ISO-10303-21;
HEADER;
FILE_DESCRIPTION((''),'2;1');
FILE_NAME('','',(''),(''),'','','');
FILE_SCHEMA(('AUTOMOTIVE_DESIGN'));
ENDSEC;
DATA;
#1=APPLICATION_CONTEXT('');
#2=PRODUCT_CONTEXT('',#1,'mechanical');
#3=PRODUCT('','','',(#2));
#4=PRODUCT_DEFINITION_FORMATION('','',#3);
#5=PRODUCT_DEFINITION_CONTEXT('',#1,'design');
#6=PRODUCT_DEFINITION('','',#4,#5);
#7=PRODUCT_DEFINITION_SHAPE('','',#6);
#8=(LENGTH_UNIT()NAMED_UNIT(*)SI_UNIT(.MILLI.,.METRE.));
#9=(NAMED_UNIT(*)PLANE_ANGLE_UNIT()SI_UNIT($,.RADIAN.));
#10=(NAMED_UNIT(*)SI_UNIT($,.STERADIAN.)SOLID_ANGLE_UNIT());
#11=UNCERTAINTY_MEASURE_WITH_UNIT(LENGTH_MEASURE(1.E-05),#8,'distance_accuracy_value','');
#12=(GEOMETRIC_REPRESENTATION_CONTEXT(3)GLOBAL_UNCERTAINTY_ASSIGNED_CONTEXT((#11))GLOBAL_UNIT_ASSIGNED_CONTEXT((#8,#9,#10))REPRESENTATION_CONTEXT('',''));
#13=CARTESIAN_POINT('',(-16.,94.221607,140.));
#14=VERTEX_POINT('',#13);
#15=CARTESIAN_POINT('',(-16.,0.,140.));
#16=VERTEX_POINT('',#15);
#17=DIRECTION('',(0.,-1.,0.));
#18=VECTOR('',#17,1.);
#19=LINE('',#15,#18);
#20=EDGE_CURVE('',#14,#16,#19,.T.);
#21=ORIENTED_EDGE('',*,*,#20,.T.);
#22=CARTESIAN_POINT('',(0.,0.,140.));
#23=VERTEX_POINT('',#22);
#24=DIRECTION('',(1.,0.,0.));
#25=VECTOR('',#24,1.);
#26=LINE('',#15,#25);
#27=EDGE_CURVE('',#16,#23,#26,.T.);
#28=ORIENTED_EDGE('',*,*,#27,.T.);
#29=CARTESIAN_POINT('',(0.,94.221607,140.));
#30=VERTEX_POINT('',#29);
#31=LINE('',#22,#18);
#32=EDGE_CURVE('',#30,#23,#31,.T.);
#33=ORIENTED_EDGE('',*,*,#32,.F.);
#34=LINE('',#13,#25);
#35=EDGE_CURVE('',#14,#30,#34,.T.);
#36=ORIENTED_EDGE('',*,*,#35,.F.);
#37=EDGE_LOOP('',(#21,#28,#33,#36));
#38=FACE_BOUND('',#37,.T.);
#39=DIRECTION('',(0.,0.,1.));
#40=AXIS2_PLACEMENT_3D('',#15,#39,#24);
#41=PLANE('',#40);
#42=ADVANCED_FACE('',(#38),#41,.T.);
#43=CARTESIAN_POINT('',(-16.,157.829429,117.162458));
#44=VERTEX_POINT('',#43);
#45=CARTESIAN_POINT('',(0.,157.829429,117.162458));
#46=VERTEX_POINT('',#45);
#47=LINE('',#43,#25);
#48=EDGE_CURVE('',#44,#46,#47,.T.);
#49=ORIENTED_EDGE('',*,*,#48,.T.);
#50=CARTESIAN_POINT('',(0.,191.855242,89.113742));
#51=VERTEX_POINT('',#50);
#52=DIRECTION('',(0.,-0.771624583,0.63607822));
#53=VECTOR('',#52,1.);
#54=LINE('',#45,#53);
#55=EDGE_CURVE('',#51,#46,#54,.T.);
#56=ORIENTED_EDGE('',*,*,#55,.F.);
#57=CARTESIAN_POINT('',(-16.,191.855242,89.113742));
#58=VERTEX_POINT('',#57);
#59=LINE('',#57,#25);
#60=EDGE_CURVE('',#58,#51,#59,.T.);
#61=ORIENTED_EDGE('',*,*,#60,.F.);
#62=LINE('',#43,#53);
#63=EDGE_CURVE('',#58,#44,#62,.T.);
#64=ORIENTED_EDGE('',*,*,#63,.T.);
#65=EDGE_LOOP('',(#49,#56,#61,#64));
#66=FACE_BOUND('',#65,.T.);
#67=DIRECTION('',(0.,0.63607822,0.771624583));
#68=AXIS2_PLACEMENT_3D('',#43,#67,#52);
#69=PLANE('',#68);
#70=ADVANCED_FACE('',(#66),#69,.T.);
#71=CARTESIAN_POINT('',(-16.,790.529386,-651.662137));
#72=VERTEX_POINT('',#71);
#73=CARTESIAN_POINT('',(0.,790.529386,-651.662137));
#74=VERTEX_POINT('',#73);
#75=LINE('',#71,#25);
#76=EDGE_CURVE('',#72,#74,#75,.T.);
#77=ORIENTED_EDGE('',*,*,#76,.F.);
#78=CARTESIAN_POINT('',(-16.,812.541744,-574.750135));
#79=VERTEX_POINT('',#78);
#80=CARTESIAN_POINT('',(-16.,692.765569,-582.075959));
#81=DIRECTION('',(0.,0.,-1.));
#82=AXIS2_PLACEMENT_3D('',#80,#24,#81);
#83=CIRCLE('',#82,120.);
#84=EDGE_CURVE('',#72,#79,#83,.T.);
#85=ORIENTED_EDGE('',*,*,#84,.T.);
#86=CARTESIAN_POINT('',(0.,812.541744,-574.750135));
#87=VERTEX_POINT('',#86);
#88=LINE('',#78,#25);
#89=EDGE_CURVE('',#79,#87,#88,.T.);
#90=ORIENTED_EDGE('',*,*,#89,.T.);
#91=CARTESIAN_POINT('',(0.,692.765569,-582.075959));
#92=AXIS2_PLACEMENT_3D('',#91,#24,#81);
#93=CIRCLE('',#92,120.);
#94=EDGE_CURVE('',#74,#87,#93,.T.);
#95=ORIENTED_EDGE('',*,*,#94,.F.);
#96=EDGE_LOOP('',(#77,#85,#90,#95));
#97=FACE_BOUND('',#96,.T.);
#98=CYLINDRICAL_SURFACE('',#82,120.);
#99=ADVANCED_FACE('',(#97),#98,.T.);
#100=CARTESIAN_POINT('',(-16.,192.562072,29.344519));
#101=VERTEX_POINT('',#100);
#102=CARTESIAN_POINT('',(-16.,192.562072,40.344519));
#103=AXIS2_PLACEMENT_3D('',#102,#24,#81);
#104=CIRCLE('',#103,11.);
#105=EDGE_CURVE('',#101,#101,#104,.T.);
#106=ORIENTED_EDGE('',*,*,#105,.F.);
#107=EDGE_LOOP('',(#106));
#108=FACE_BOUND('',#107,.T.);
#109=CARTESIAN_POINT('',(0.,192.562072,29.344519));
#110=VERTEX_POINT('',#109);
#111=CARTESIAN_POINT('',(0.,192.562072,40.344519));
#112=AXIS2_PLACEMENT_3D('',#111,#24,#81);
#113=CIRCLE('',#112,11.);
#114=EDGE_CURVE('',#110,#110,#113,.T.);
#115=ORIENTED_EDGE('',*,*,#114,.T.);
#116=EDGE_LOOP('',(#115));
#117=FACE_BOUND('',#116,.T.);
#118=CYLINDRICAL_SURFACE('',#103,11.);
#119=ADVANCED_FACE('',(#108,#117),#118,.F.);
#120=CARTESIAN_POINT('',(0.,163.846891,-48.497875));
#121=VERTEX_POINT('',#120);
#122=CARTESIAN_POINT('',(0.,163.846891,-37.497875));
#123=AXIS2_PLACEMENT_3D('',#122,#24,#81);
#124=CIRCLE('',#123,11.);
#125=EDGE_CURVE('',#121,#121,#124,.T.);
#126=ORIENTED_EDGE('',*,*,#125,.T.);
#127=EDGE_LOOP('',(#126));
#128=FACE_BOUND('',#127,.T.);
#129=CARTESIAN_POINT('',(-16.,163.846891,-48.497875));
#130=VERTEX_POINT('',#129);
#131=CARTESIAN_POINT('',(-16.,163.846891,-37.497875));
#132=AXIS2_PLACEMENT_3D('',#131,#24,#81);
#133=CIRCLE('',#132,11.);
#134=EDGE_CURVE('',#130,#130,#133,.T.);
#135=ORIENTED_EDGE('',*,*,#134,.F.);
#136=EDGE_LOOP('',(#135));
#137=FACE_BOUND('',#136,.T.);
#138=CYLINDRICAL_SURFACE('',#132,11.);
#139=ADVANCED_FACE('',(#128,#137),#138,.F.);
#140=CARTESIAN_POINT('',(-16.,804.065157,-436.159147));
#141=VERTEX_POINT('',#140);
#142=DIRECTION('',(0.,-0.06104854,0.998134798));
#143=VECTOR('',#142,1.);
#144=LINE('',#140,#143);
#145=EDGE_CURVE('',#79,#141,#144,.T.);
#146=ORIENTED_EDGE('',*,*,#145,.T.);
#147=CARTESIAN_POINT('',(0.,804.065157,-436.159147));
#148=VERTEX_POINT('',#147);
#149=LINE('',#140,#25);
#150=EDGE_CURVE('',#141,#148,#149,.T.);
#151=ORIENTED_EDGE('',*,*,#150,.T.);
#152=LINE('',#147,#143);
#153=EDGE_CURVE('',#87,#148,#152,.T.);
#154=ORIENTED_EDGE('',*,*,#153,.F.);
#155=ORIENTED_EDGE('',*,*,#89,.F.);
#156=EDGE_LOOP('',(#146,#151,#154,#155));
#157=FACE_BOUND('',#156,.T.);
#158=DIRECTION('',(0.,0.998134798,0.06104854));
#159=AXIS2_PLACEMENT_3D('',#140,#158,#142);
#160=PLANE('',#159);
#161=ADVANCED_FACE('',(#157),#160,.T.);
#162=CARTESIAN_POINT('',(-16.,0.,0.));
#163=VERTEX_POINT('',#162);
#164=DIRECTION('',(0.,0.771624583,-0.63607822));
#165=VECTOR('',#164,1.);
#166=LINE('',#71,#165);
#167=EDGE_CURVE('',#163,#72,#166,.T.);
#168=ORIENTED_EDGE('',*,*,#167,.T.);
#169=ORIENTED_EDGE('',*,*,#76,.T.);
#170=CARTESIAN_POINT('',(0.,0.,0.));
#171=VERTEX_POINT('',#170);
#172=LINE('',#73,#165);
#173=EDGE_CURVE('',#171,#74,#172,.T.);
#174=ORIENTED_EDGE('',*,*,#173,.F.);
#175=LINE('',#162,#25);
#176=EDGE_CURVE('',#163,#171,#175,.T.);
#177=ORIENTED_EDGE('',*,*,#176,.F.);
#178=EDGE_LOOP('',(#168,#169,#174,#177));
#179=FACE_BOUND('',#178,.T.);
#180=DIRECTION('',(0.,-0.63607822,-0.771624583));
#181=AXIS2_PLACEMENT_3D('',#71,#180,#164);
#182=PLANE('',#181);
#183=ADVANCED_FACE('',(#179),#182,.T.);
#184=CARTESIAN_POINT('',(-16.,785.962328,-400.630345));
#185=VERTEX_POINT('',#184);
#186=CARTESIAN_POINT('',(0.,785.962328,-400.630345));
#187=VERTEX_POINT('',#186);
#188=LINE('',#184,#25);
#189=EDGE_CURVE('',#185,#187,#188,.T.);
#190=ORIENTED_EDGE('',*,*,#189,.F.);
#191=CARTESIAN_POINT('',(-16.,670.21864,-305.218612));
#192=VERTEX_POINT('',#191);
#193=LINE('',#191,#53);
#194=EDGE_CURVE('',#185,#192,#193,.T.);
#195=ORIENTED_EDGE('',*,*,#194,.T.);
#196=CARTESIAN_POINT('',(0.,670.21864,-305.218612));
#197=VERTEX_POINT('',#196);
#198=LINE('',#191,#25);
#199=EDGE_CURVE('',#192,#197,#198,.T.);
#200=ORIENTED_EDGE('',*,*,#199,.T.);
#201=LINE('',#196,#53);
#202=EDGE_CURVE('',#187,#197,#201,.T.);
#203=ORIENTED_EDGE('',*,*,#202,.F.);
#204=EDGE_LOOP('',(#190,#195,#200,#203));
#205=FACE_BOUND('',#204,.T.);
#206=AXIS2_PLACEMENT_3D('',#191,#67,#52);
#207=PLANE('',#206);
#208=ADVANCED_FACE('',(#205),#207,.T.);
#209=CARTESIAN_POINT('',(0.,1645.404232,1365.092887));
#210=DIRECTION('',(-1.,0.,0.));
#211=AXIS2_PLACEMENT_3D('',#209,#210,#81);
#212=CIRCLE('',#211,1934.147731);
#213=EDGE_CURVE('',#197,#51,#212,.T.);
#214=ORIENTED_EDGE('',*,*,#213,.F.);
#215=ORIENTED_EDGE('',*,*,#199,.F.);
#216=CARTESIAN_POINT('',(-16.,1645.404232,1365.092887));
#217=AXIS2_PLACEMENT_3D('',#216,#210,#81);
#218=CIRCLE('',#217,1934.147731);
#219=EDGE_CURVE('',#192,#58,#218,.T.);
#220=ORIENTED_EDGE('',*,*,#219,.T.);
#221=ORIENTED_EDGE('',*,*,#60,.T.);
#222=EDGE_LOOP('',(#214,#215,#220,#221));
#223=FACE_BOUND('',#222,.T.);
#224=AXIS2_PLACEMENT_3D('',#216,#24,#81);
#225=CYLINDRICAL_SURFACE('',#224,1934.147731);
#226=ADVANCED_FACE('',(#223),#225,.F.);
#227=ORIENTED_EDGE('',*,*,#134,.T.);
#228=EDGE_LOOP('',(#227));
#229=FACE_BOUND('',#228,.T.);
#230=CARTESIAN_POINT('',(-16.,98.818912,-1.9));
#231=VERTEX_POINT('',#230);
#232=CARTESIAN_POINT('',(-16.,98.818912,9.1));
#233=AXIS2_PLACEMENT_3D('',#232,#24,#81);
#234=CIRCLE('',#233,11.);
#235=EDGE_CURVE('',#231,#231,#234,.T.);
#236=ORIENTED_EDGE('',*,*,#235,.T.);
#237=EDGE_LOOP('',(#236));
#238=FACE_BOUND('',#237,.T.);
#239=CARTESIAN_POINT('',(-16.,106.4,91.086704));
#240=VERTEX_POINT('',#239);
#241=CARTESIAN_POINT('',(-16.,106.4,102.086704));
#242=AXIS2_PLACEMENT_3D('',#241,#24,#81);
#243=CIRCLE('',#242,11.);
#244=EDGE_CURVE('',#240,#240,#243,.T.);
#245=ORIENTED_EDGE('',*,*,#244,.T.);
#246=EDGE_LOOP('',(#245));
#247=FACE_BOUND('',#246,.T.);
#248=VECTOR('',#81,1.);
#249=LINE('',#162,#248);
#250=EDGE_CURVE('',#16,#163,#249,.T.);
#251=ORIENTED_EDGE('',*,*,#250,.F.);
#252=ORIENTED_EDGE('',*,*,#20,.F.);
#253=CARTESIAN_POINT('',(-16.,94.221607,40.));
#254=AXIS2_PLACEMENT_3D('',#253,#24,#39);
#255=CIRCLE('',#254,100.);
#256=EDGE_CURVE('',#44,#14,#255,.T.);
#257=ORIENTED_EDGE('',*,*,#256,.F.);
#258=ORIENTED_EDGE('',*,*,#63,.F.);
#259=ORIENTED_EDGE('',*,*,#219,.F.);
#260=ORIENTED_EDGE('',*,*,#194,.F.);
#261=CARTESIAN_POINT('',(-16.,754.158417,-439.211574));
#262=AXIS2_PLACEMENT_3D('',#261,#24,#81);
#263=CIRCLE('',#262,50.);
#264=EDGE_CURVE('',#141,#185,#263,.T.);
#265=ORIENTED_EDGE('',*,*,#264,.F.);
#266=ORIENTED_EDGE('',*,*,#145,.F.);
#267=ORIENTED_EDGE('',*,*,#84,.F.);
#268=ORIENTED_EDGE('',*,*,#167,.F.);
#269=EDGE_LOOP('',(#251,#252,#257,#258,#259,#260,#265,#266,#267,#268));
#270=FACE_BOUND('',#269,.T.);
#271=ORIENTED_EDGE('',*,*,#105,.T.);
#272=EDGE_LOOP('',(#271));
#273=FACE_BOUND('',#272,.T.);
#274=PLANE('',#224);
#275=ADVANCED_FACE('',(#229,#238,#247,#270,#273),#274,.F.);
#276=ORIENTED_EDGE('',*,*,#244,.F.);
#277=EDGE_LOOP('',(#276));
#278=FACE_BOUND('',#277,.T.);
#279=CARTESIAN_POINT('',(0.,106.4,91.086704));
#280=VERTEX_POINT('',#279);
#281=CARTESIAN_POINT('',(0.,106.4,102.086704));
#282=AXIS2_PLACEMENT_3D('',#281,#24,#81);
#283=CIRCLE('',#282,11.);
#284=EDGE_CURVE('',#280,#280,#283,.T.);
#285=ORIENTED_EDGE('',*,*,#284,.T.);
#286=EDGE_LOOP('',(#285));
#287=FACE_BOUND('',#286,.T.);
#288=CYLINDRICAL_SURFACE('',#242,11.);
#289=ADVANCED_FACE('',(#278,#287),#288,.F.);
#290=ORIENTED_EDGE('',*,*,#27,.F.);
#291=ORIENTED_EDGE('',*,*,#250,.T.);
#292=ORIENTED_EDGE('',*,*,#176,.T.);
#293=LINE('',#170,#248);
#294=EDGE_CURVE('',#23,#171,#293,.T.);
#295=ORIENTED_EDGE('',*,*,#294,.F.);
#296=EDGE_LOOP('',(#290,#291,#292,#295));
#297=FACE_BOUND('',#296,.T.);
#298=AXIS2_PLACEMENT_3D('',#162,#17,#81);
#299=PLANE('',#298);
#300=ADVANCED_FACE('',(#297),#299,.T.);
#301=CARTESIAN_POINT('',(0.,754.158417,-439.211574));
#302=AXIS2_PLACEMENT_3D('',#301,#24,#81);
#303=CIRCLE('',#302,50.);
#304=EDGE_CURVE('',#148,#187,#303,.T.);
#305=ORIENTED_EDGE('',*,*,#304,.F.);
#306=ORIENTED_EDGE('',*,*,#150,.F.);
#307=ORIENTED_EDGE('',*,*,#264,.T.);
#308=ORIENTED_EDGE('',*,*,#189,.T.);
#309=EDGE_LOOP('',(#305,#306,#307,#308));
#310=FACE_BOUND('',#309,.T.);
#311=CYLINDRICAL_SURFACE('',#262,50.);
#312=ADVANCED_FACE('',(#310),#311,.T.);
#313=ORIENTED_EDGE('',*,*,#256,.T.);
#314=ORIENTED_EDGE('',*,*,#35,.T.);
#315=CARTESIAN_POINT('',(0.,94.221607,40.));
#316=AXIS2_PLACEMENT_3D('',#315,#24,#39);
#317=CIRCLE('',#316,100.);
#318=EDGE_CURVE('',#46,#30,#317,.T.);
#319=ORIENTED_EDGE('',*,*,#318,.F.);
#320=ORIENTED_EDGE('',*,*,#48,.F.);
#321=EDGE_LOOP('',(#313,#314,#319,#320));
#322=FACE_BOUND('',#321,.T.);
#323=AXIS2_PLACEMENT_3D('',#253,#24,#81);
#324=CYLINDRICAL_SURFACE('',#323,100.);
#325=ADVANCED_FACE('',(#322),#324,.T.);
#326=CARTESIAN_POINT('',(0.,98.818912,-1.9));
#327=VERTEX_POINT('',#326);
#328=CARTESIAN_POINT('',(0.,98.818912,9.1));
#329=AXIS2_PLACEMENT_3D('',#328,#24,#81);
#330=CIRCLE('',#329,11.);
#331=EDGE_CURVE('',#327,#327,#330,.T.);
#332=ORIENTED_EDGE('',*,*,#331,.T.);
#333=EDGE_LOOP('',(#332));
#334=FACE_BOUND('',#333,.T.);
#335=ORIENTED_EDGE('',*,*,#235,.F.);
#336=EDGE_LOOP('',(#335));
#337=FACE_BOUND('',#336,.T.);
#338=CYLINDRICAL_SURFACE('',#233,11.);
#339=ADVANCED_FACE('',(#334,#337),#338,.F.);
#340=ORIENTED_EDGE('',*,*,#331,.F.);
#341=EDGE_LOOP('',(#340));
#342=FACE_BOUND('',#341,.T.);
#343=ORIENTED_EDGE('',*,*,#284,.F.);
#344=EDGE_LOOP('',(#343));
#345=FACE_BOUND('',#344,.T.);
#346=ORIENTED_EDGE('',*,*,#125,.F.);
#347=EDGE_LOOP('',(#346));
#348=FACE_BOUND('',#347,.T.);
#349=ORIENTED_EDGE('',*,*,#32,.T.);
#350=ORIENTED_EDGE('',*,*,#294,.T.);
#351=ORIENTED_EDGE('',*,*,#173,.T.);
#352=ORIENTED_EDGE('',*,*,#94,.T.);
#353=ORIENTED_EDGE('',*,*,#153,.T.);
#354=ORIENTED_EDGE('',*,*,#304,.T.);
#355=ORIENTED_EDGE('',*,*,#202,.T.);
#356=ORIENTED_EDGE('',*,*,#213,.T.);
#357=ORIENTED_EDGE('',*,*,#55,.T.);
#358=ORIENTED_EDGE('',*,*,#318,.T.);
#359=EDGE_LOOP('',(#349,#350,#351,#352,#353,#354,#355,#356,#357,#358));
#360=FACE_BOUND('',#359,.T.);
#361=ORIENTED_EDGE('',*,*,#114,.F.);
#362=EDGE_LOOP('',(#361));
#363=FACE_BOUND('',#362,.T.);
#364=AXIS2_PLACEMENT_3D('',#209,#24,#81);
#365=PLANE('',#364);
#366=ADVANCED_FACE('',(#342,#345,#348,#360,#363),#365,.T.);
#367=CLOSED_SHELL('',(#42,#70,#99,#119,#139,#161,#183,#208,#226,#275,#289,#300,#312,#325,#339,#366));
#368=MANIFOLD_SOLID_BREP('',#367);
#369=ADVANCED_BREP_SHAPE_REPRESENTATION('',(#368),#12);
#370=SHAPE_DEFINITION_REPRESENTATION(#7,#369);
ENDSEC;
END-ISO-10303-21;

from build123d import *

# Parameters (mm, degrees)
BASE_FLANGE1_DEPTH = 16
SKETCH3_R          = 11
CUT_HOLES_DEPTH    = 1042.876868884


# Sheet-metal steps are written as plain solids
with BuildPart() as part:
    # Sketch1 → Base-Flange1 (new body)
    with BuildSketch(Plane(origin=(0, 0, 0), x_dir=(0, 0, -1), z_dir=(1, 0, 0))):
        with BuildLine():
            Line((305.218612063, 670.218640107), (400.630345104, 785.962327615))
            ThreePointArc((400.630345104, 785.962327615), (416.512049286, 798.70874281), (436.159147295, 804.065156521))
            Line((436.159147295, 804.065156521), (574.750134607, 812.541744435))
            ThreePointArc((574.750134607, 812.541744435), (615.094497482, 808.133571726), (651.662136675, 790.529385681))
            Line((651.662136675, 790.529385681), (0, 0))
            Line((0, 0), (-140, 0))
            Line((-140, 0), (-140, 94.22160699))
            ThreePointArc((-140, 94.22160699), (-134.117601526, 128.01327879), (-117.162458339, 157.829429018))
            Line((-117.162458339, 157.829429018), (-89.113742378, 191.855242319))
            ThreePointArc((-89.113742378, 191.855242319), (127.343049427, 415.134985706), (305.218612063, 670.218640107))
        make_face()
    extrude(amount=-BASE_FLANGE1_DEPTH)

    # Sketch3 → Cut-Holes (cut, through all)
    with BuildSketch(Plane(origin=(0, 0, 0), x_dir=(0, 0, -1), z_dir=(1, 0, 0))):
        with Locations((-40.344519187, 192.562071849)):
            Circle(SKETCH3_R)
        with Locations((-102.086703913, 106.4)):
            Circle(SKETCH3_R)
        with Locations((-9.1, 98.818911988)):
            Circle(SKETCH3_R)
        with Locations((37.497875264, 163.846890742)):
            Circle(SKETCH3_R)
    extrude(amount=-CUT_HOLES_DEPTH, mode=Mode.SUBTRACT)


solid = part.part
